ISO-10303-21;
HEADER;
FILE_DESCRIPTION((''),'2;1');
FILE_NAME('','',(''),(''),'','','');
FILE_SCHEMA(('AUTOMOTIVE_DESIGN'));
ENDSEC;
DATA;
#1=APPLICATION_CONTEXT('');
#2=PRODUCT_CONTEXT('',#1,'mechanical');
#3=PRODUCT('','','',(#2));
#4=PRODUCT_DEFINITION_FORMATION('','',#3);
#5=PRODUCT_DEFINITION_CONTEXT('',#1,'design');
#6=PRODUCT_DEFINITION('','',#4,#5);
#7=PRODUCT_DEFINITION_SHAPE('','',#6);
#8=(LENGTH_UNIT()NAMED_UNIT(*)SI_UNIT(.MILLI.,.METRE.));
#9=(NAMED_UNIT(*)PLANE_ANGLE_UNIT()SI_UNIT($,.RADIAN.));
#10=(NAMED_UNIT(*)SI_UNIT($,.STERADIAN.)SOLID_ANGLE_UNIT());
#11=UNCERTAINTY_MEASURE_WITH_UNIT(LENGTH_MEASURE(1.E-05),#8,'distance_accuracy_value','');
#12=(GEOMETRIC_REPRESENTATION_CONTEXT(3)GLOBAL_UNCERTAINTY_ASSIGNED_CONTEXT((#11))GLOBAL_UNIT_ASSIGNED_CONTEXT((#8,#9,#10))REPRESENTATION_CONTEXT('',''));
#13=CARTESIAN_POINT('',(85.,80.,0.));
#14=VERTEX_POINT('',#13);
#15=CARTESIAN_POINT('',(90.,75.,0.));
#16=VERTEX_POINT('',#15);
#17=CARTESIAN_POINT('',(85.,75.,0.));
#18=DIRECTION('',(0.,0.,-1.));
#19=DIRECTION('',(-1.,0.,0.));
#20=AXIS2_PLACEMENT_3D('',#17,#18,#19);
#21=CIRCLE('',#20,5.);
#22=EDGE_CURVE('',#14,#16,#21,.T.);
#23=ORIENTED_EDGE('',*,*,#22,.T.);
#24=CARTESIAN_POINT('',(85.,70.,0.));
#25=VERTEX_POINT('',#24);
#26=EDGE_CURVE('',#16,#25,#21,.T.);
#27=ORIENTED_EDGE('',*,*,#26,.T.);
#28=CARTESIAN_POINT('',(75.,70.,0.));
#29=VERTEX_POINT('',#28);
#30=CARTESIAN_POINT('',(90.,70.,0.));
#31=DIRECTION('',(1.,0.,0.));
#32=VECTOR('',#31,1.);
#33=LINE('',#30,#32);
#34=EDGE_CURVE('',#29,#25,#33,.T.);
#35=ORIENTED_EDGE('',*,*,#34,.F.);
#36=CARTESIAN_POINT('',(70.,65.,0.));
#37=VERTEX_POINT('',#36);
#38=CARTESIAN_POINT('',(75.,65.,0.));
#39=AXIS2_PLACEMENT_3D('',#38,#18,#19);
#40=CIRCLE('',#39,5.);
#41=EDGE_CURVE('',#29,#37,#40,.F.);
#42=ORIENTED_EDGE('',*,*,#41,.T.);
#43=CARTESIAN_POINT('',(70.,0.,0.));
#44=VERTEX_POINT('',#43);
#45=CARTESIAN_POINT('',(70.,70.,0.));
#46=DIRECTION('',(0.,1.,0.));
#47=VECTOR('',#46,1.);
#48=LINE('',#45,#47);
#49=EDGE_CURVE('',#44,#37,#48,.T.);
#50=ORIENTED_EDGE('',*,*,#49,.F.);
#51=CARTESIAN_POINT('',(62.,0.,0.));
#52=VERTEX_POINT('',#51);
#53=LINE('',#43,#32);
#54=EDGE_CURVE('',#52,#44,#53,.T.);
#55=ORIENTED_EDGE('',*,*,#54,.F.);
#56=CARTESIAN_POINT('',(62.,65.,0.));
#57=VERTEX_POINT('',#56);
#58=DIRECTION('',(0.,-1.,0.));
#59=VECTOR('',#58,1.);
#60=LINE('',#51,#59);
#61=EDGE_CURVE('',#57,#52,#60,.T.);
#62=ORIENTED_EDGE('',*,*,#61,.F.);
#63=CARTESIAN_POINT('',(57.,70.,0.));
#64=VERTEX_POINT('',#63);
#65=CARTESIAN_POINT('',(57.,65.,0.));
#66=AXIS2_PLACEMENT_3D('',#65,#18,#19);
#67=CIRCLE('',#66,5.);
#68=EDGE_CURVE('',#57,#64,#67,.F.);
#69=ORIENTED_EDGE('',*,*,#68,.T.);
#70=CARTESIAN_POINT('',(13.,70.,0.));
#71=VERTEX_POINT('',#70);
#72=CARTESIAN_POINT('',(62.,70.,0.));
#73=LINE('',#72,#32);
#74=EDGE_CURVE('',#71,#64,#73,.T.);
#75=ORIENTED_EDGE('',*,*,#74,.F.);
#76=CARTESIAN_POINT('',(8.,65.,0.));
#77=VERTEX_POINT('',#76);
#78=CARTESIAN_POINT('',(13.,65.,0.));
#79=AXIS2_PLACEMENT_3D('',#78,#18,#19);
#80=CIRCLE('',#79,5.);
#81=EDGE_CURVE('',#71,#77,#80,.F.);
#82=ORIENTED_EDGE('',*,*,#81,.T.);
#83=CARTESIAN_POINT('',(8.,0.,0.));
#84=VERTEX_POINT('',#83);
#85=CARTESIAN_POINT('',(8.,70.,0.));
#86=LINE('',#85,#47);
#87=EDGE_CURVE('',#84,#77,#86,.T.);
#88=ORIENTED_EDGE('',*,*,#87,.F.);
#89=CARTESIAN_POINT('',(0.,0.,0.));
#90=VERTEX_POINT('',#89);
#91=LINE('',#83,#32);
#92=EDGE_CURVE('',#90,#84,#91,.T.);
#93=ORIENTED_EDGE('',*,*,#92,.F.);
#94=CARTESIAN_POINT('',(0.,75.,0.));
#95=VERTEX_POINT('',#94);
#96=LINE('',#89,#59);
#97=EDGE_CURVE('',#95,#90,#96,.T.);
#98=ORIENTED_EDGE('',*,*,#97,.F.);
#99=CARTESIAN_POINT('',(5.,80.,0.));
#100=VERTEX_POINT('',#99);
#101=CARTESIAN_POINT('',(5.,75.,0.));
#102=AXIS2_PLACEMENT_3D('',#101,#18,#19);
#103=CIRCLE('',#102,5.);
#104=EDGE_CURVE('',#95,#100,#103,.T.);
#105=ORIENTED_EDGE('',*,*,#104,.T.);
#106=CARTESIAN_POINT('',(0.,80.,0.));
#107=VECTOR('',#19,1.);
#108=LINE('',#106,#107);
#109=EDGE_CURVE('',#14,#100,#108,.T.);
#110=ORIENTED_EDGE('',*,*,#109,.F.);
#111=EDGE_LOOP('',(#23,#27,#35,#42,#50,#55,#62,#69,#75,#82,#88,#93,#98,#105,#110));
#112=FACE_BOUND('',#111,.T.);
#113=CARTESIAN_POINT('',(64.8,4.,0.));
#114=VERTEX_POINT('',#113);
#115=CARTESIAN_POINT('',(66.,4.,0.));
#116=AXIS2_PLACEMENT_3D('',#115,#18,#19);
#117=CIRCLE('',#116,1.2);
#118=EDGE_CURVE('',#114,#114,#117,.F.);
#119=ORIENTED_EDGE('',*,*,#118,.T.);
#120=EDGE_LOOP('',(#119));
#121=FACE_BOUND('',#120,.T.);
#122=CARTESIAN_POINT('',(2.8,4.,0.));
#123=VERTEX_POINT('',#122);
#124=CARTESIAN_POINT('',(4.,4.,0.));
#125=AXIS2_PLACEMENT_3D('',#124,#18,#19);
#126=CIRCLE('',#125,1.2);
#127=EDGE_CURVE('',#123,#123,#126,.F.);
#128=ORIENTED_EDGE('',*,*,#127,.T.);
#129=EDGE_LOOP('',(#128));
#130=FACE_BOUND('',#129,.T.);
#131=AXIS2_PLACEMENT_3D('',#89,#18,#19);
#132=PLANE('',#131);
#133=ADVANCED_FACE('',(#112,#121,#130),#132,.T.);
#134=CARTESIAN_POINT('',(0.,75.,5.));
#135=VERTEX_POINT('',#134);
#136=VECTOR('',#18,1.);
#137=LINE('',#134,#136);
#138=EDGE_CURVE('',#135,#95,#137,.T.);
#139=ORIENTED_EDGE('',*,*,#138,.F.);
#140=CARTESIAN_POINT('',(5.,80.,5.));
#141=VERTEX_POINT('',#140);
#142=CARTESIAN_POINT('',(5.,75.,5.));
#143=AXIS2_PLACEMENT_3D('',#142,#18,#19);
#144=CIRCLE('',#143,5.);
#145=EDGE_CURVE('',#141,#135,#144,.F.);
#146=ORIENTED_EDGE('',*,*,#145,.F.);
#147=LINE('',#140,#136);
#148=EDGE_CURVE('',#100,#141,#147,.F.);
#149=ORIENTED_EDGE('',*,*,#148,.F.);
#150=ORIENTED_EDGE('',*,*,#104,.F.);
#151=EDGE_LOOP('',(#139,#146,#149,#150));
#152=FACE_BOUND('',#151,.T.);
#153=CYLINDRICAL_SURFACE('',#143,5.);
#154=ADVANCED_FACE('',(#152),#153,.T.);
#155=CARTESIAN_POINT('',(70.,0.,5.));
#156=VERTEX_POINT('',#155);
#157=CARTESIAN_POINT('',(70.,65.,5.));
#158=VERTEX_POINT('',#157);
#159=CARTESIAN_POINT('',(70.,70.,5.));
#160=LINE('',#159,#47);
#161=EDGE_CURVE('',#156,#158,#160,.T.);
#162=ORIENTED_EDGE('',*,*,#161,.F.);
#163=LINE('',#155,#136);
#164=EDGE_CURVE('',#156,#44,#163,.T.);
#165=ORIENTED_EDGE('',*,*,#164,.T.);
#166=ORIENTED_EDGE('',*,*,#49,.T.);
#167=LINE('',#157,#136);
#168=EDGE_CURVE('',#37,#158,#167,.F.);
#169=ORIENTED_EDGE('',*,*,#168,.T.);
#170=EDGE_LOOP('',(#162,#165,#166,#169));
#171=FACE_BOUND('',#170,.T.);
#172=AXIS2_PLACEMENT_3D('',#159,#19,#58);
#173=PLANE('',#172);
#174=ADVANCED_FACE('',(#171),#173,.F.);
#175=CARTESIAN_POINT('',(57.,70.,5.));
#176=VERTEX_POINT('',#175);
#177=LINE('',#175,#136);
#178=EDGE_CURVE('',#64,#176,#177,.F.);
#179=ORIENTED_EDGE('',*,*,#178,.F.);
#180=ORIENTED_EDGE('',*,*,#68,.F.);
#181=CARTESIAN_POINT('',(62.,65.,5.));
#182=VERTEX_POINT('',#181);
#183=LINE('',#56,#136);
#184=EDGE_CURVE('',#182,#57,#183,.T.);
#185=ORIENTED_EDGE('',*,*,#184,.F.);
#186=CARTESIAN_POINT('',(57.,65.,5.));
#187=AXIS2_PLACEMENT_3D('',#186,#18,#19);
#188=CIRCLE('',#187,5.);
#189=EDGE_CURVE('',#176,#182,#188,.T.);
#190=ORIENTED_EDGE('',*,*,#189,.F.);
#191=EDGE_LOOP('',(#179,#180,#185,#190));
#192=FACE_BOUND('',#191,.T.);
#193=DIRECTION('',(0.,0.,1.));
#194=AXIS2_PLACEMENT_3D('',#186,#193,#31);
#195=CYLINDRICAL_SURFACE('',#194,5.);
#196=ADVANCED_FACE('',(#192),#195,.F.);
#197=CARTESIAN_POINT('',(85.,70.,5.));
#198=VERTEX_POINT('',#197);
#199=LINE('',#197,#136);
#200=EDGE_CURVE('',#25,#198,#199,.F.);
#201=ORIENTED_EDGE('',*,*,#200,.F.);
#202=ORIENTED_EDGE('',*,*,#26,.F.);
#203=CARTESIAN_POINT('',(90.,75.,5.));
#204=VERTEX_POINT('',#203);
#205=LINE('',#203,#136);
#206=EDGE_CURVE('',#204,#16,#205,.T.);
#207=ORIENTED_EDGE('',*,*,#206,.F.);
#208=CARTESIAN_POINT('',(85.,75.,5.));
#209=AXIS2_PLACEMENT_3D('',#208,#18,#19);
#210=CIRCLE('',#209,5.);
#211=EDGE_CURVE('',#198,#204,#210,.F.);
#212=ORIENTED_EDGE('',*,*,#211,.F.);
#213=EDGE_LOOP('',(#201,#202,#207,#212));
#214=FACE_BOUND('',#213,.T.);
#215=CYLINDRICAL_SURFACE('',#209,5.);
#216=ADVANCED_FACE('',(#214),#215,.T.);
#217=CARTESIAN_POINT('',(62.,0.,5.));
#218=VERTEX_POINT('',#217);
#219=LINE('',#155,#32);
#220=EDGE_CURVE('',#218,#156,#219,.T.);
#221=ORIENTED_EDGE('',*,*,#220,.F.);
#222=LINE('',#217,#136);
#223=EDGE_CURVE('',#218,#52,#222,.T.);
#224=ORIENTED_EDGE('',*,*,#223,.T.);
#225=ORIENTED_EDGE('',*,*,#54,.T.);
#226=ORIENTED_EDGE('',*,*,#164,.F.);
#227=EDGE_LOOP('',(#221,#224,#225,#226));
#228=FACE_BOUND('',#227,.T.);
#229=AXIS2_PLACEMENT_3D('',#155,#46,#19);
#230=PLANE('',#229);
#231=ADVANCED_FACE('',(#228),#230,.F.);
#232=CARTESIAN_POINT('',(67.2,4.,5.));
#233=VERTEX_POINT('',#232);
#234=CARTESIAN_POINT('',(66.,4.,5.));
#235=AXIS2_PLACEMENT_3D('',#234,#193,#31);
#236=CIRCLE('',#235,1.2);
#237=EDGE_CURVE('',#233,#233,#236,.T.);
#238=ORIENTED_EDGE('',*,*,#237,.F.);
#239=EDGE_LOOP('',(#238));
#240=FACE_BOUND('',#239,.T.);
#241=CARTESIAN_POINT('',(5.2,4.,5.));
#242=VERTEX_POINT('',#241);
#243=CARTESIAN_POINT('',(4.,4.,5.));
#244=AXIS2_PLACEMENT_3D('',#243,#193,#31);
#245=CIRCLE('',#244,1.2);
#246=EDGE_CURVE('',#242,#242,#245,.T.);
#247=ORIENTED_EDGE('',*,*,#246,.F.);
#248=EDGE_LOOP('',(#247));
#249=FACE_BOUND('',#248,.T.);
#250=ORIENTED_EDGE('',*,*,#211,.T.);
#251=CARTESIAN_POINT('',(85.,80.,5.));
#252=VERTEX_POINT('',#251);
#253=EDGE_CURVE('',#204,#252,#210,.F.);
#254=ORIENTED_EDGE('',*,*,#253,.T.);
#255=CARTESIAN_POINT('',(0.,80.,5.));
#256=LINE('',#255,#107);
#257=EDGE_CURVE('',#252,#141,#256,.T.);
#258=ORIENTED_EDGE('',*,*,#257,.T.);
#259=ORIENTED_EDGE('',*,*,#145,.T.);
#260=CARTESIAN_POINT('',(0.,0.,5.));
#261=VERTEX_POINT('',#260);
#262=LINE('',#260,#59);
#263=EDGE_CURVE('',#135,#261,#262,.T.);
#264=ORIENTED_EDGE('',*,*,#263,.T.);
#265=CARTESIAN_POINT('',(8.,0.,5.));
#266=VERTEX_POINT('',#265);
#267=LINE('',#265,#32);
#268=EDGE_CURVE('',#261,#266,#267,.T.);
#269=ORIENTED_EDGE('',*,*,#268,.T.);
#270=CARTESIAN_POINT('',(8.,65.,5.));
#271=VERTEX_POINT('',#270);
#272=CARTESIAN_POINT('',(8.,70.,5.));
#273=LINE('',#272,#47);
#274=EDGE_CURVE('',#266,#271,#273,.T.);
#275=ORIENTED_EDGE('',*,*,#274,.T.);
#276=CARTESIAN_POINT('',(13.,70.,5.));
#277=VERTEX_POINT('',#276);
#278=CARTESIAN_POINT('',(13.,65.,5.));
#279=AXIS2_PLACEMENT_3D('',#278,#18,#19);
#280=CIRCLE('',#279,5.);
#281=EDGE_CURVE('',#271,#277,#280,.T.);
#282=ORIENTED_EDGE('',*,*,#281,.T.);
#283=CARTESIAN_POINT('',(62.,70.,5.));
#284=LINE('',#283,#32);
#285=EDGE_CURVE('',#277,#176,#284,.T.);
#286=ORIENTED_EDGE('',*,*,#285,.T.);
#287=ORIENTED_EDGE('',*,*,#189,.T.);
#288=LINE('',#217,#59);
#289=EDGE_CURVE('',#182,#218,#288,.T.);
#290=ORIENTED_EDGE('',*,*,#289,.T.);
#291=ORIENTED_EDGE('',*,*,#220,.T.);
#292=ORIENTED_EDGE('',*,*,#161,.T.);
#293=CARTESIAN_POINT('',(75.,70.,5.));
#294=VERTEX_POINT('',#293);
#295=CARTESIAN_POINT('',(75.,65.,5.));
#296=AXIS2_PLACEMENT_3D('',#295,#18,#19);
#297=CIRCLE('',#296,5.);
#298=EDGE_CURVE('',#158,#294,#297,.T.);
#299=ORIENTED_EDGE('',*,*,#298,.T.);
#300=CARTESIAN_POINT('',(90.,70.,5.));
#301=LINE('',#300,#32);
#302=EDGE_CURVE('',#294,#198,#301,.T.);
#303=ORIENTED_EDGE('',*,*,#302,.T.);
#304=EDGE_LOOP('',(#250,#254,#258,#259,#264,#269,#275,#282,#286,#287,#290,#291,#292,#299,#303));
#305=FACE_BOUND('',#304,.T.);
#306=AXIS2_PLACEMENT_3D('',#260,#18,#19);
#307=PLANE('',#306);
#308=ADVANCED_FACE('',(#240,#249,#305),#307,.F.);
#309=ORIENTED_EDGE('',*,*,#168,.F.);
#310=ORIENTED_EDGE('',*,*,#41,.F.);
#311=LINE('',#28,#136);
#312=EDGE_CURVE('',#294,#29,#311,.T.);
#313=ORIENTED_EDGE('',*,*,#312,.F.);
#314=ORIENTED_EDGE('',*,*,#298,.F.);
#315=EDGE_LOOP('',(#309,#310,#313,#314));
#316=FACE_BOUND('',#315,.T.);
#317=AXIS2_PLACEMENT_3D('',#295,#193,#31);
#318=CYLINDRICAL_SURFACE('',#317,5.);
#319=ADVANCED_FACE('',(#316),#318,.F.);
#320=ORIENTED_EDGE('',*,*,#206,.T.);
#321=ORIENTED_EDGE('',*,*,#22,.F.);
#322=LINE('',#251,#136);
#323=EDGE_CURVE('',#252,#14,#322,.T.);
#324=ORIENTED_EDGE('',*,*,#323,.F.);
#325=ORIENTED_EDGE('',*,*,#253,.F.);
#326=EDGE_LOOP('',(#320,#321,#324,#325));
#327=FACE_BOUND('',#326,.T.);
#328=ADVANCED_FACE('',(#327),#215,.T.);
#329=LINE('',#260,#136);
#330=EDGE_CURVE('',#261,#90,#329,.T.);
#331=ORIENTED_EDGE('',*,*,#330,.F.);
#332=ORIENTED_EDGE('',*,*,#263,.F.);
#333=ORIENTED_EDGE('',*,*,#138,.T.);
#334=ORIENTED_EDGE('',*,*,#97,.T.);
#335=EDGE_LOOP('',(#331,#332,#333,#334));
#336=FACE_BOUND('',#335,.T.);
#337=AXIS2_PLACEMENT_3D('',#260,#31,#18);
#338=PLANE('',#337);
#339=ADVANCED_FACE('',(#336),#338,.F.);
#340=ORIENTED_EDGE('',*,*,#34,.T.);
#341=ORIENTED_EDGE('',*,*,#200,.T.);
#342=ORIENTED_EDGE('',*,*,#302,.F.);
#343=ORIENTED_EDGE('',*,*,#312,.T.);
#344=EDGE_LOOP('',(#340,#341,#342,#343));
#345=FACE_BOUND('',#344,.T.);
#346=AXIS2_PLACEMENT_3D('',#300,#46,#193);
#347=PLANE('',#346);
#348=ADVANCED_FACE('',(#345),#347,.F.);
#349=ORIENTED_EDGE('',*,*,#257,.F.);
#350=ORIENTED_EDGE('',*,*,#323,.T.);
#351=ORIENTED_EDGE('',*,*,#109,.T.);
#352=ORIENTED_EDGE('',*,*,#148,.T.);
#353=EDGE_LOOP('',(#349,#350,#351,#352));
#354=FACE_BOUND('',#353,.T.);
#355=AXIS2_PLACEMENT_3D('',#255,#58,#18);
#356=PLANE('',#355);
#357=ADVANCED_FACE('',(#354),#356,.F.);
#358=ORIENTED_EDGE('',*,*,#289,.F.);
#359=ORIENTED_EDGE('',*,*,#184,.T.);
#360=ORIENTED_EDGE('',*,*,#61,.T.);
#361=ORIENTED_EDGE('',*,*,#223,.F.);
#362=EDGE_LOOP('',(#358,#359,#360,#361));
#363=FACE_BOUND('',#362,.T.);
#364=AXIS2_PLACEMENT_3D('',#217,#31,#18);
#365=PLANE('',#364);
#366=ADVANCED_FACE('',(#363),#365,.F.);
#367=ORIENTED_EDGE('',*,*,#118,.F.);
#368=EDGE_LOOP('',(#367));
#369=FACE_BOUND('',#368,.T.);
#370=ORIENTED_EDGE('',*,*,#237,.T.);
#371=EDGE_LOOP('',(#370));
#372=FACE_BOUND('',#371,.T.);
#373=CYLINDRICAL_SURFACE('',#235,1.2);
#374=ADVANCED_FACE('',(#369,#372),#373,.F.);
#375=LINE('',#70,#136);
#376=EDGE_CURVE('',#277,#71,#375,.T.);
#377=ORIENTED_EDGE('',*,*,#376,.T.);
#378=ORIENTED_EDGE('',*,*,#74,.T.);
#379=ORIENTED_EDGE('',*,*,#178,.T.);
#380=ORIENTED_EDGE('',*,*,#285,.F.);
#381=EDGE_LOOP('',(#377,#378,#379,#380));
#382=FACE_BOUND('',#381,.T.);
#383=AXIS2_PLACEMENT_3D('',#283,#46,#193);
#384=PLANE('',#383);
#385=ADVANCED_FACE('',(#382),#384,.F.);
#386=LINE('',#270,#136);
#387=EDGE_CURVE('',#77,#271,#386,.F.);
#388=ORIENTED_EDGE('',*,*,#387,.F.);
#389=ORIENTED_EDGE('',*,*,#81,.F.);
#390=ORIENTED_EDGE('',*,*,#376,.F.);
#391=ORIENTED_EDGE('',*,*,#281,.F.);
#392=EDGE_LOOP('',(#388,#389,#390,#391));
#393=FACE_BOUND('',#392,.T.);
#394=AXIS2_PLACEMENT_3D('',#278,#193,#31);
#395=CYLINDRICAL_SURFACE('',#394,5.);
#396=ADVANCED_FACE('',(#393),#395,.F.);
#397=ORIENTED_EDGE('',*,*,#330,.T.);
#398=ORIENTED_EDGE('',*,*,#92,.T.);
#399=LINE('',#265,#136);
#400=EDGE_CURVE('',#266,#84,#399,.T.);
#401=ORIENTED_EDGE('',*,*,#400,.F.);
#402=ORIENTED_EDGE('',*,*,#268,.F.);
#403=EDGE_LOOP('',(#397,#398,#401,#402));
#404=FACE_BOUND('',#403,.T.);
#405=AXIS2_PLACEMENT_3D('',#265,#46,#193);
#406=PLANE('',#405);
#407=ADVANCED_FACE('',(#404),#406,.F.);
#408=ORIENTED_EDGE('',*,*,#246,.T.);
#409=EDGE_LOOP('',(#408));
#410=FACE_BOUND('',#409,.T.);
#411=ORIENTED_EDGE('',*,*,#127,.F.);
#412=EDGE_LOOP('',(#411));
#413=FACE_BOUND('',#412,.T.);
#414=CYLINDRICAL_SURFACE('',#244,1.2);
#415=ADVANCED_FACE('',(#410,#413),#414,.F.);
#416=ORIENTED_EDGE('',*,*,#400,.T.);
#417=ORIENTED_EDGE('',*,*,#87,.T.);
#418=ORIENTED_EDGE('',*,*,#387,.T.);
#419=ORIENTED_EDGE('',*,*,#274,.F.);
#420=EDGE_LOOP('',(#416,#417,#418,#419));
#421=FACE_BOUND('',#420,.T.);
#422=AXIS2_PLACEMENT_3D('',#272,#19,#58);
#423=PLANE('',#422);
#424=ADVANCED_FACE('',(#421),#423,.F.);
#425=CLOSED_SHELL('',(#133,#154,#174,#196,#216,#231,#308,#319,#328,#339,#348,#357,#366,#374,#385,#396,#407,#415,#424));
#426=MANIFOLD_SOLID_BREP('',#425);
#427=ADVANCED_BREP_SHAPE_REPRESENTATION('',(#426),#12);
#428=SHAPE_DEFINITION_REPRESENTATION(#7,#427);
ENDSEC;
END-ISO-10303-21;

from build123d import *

# Parameters (mm, degrees)
ESQUISSE1_R          = 1
BOSS_EXTRU_1_DEPTH   = 5
D_GAGEMENT_M21_D     = 2.4
D_GAGEMENT_M21_DEPTH = 5
D_GAGEMENT_M21_TIP   = 0.721032743
CONG_1_START         = -1
CONG_1_DEPTH         = 7
CONG_1_2_DEPTH       = 5


with BuildPart() as part:
    # Esquisse1 → Boss.-Extru.1 (new body)
    with BuildSketch(Plane.XY):
        Polygon((0, 0), (0, 80), (90, 80), (90, 70), (70, 70), (70, 0), (62, 0), (62, 70), (8, 70), (8, 0), align=None)
        with Locations((4, 4)):
            Circle(ESQUISSE1_R, mode=Mode.SUBTRACT)
        with Locations((66, 4)):
            Circle(ESQUISSE1_R, mode=Mode.SUBTRACT)
    extrude(amount=BOSS_EXTRU_1_DEPTH)

    # Dégagement M21
    with Locations(Plane.XY.offset(5)):
        with Locations((4, 4), (66, 4)):
            Hole(D_GAGEMENT_M21_D / 2, depth=D_GAGEMENT_M21_DEPTH)
            with Locations((0, 0, -(D_GAGEMENT_M21_DEPTH + D_GAGEMENT_M21_TIP / 2))):  # 118° drill point
                Cone(0, D_GAGEMENT_M21_D / 2, D_GAGEMENT_M21_TIP, mode=Mode.SUBTRACT)

    # Congé1: read off the stored shape, not the designer's step
    # Congé1 outline → Congé1 (cut)
    with BuildSketch(Plane.XY.offset(CONG_1_START)):
        with BuildLine():
            Line((0, 80), (0, 75))
            ThreePointArc((0, 75), (1.464466094, 78.535533906), (5, 80))
            Line((5, 80), (0, 80))
        make_face()
        with BuildLine():
            Line((90, 70), (90, 75))
            ThreePointArc((90, 75), (88.535533906, 71.464466094), (85, 70))
            Line((85, 70), (90, 70))
        make_face()
        with BuildLine():
            Line((90, 80), (85, 80))
            ThreePointArc((85, 80), (88.535533906, 78.535533906), (90, 75))
            Line((90, 75), (90, 80))
        make_face()
    extrude(amount=CONG_1_DEPTH, mode=Mode.SUBTRACT)

    # Cong_1 2 outline → Cong_1 2 (add)
    with BuildSketch(Plane.XY):
        with BuildLine():
            ThreePointArc((70, 65), (71.464466094, 68.535533906), (75, 70))
            Line((75, 70), (70, 70))
            Line((70, 70), (70, 65))
        make_face()
        with BuildLine():
            ThreePointArc((8, 65), (9.464466094, 68.535533906), (13, 70))
            Line((13, 70), (8, 70))
            Line((8, 70), (8, 65))
        make_face()
        with BuildLine():
            ThreePointArc((57, 70), (60.535533906, 68.535533906), (62, 65))
            Line((62, 65), (62, 70))
            Line((62, 70), (57, 70))
        make_face()
    extrude(amount=CONG_1_2_DEPTH)


solid = part.part
